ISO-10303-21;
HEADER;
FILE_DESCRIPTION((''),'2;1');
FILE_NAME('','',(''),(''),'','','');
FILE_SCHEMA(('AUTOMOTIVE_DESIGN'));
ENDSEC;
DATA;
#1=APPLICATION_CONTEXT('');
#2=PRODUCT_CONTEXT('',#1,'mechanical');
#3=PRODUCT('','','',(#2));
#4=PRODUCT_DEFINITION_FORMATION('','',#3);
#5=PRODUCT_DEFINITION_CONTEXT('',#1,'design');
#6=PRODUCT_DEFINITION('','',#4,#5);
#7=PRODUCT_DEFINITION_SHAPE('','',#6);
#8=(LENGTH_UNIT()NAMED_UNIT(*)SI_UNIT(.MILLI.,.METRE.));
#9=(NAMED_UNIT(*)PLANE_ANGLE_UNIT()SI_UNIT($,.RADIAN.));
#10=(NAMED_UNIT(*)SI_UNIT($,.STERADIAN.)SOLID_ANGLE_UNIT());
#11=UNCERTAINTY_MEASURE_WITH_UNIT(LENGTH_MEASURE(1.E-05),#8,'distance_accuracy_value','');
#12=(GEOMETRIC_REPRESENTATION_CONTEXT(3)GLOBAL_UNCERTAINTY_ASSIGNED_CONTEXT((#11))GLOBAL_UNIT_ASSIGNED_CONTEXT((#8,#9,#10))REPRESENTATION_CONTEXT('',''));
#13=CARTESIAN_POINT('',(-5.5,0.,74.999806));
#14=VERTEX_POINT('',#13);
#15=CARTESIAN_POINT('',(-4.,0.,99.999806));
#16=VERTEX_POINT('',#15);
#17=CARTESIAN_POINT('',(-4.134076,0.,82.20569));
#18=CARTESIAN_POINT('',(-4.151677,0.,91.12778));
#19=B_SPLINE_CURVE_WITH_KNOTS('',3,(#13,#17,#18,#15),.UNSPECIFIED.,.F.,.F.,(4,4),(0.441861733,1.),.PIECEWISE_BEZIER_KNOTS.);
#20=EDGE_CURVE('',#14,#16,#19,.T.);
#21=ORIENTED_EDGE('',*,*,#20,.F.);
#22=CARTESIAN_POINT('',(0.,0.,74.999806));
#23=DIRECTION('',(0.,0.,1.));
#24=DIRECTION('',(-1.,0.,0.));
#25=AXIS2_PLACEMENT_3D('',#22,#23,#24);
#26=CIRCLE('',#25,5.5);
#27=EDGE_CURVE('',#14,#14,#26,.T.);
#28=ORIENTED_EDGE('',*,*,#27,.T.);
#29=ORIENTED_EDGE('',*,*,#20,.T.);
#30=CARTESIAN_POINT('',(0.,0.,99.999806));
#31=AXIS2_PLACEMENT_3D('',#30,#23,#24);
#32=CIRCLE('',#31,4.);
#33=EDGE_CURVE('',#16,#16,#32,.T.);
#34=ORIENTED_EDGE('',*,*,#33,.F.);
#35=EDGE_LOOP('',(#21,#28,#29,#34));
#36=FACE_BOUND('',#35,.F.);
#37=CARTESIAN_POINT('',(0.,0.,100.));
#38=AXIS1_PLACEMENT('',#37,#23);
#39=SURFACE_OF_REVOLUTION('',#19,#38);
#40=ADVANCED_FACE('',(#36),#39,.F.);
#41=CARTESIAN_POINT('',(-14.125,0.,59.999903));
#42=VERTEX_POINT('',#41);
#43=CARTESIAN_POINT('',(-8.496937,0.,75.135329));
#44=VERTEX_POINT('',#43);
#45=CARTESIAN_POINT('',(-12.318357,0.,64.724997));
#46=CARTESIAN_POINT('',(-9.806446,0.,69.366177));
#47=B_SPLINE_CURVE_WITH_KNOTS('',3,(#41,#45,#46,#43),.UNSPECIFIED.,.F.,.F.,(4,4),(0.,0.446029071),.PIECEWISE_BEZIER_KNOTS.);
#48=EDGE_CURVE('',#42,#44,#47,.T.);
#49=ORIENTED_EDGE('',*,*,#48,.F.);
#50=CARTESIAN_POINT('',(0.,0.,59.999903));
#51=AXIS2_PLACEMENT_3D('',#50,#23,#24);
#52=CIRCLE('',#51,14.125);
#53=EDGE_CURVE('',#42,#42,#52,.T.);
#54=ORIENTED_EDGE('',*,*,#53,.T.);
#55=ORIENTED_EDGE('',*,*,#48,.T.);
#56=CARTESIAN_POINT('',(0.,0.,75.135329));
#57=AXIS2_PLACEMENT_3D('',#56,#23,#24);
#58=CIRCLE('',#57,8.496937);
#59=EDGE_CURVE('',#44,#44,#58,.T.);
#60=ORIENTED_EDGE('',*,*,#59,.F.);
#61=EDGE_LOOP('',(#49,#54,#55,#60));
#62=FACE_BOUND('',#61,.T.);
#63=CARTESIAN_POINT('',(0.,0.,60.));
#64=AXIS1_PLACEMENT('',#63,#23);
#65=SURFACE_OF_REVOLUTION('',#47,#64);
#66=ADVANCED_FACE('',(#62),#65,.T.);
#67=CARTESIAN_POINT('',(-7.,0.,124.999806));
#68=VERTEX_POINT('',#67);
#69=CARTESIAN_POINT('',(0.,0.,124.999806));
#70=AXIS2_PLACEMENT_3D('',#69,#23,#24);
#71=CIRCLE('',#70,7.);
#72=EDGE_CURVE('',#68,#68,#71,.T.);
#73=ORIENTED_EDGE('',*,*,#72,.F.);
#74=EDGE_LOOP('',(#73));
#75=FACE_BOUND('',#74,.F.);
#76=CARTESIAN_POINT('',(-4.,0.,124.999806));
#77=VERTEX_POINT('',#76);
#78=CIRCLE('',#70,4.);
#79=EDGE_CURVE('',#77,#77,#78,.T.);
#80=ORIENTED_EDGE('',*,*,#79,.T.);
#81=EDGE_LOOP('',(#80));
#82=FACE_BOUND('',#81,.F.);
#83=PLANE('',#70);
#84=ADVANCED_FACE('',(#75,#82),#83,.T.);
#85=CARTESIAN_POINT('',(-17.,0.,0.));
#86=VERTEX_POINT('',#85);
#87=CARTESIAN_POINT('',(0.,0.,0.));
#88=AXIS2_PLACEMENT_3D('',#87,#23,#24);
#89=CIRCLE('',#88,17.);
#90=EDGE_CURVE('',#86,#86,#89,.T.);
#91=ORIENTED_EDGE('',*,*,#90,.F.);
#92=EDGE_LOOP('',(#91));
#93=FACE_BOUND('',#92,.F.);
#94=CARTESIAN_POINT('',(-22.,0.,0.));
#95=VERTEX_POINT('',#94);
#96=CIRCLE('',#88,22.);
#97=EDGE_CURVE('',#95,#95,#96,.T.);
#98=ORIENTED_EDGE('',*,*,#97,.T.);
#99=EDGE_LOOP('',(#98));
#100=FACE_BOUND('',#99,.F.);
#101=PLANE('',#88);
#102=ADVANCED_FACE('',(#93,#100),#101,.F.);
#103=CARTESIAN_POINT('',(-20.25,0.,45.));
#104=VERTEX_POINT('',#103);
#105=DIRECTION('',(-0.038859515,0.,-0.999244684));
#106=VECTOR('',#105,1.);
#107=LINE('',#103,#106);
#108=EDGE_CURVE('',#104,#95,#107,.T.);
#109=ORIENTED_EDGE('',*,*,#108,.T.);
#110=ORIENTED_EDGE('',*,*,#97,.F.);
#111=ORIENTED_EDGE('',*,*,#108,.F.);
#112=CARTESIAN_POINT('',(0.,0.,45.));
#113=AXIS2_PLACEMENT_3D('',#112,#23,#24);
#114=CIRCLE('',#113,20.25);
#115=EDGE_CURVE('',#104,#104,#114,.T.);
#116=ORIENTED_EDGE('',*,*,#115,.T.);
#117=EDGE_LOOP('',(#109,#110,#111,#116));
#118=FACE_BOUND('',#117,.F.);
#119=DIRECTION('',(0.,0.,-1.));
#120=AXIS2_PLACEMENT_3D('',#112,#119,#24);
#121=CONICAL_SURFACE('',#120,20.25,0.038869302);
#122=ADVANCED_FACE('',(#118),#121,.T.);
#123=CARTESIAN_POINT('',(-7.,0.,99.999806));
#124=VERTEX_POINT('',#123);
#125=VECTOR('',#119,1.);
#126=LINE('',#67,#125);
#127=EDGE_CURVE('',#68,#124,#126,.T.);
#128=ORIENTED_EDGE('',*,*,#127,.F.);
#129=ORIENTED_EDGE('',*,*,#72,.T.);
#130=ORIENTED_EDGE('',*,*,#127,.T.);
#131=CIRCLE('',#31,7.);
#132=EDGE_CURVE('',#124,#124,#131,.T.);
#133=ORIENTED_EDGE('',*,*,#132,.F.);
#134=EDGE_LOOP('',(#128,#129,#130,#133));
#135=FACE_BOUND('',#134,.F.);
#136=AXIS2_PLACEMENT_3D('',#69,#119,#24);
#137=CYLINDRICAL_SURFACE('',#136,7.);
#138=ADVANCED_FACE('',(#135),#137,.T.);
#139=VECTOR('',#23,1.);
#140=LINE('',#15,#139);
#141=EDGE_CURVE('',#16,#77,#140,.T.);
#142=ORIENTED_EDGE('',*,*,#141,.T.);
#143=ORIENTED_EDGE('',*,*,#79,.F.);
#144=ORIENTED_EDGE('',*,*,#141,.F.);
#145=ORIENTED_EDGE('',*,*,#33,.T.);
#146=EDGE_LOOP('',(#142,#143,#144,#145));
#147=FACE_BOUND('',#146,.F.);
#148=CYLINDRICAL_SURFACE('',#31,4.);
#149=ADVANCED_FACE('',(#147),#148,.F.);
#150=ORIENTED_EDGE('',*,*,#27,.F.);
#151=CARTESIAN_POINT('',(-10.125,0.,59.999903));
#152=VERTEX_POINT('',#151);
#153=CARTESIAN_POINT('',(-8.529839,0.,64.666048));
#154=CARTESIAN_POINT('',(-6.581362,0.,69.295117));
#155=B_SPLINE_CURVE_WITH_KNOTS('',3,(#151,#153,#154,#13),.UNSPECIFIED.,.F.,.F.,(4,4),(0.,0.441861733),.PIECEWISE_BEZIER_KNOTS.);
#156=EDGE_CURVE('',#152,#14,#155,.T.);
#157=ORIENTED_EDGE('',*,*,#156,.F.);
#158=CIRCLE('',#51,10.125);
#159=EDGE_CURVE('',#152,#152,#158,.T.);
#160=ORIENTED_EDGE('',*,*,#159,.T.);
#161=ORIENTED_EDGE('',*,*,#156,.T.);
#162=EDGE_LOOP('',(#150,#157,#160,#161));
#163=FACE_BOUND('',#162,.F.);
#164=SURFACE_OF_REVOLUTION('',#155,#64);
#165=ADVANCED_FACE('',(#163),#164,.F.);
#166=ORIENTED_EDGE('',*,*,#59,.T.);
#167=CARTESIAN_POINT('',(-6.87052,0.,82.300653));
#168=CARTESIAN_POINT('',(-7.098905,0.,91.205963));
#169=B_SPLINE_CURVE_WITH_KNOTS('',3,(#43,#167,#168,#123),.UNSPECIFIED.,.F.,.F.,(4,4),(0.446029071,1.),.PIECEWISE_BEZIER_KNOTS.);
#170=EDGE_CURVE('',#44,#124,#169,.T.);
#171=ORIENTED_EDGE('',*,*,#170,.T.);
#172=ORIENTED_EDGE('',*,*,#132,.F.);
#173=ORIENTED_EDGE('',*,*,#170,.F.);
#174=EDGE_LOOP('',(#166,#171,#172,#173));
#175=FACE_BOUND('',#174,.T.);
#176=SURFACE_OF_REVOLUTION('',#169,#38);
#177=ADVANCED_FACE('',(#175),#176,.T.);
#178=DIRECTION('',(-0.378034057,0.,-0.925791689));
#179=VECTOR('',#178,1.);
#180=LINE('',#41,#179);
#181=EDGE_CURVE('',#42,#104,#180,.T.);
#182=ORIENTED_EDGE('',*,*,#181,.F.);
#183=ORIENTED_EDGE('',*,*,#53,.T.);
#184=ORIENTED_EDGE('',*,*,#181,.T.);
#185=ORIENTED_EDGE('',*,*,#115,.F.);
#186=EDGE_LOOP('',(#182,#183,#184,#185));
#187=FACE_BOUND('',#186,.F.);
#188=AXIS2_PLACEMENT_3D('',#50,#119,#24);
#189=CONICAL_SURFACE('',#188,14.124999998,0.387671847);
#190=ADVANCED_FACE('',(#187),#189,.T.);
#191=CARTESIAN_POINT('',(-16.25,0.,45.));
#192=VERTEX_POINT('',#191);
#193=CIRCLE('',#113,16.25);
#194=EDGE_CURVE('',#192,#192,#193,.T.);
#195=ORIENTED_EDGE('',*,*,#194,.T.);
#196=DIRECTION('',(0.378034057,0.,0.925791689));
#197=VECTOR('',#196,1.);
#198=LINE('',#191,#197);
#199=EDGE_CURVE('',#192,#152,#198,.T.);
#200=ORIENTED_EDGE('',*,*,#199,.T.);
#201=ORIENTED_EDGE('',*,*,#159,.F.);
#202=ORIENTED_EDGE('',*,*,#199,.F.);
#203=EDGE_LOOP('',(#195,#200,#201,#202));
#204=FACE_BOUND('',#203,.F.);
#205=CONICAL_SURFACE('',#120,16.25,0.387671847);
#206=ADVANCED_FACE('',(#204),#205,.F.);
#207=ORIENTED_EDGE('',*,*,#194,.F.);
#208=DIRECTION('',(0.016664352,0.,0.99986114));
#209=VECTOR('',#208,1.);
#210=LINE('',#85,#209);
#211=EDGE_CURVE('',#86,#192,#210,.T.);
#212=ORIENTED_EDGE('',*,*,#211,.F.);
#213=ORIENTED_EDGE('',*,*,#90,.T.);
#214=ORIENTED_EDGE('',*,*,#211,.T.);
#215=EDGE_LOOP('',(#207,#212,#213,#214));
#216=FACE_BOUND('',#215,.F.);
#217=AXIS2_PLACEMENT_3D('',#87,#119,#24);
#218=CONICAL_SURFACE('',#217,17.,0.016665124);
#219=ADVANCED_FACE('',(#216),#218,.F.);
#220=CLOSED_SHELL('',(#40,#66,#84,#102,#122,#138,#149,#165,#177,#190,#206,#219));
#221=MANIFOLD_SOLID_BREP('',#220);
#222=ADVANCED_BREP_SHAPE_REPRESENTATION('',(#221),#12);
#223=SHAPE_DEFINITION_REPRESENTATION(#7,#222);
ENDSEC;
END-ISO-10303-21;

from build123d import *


with BuildPart() as f1:
    # F0 (on Front) → F1 (revolve)
    with BuildSketch(Plane.XZ):
        Polygon((-22, 0), (-17, 0), (-16.25, 45), (-20.25, 45), align=None)
    revolve(axis=Axis((0, 0, 22.5), (0, 0, 1)))

    # F0 (on Front) → F2 (revolve)
    with BuildSketch(Plane.XZ):
        with BuildLine():
            Line((-20.25, 45), (-16.25, 45))
            Line((-16.25, 45), (-10.1249999976, 59.999902775))
            add(Edge.make_bspline(
                [(-10.1249999976, 59.999902775), (-8.5298389727, 64.666048141), (-6.5813622983, 69.2951174162), (-5.4999999953, 74.9998055501)],
                knots=[0, 0, 0, 0, 0.441861733, 0.441861733, 0.441861733, 0.441861733], degree=3))
            Line((-5.4999999953, 74.9998055501), (-8.4969373337, 75.1353289405))
            add(Edge.make_bspline(
                [(-14.1249999976, 59.999902775), (-12.3183567805, 64.7249967507), (-9.8064455142, 69.3661766921), (-8.4969373337, 75.1353289405)],
                knots=[0, 0, 0, 0, 0.4460290714, 0.4460290714, 0.4460290714, 0.4460290714], degree=3))
            Line((-14.1249999976, 59.999902775), (-20.25, 45))
        make_face()
    revolve(axis=Axis((0, 0, 60), (0, 0, 1)))

    # F0 (on Front) → F3 (revolve)
    with BuildSketch(Plane.XZ):
        with BuildLine():
            Line((-8.4969373337, 75.1353289405), (-5.4999999953, 74.9998055501))
            add(Edge.make_bspline(
                [(-5.4999999953, 74.9998055501), (-4.1340756876, 82.2056903566), (-4.1516769819, 91.1277804046), (-3.9999999953, 99.9998055501)],
                knots=[0.441861733, 0.441861733, 0.441861733, 0.441861733, 1, 1, 1, 1], degree=3))
            Line((-3.9999999953, 99.9998055501), (-3.9999999953, 124.9998055501))
            Line((-3.9999999953, 124.9998055501), (-6.9999999953, 124.9998055501))
            Line((-6.9999999953, 124.9998055501), (-6.9999999953, 99.9998055501))
            add(Edge.make_bspline(
                [(-8.4969373337, 75.1353289405), (-6.8705198887, 82.3006525327), (-7.0989050536, 91.2059633256), (-6.9999999953, 99.9998055501)],
                knots=[0.4460290714, 0.4460290714, 0.4460290714, 0.4460290714, 1, 1, 1, 1], degree=3))
        make_face()
    revolve(axis=Axis((0, 0, 100), (0, 0, 1)))


solid = f1.part
